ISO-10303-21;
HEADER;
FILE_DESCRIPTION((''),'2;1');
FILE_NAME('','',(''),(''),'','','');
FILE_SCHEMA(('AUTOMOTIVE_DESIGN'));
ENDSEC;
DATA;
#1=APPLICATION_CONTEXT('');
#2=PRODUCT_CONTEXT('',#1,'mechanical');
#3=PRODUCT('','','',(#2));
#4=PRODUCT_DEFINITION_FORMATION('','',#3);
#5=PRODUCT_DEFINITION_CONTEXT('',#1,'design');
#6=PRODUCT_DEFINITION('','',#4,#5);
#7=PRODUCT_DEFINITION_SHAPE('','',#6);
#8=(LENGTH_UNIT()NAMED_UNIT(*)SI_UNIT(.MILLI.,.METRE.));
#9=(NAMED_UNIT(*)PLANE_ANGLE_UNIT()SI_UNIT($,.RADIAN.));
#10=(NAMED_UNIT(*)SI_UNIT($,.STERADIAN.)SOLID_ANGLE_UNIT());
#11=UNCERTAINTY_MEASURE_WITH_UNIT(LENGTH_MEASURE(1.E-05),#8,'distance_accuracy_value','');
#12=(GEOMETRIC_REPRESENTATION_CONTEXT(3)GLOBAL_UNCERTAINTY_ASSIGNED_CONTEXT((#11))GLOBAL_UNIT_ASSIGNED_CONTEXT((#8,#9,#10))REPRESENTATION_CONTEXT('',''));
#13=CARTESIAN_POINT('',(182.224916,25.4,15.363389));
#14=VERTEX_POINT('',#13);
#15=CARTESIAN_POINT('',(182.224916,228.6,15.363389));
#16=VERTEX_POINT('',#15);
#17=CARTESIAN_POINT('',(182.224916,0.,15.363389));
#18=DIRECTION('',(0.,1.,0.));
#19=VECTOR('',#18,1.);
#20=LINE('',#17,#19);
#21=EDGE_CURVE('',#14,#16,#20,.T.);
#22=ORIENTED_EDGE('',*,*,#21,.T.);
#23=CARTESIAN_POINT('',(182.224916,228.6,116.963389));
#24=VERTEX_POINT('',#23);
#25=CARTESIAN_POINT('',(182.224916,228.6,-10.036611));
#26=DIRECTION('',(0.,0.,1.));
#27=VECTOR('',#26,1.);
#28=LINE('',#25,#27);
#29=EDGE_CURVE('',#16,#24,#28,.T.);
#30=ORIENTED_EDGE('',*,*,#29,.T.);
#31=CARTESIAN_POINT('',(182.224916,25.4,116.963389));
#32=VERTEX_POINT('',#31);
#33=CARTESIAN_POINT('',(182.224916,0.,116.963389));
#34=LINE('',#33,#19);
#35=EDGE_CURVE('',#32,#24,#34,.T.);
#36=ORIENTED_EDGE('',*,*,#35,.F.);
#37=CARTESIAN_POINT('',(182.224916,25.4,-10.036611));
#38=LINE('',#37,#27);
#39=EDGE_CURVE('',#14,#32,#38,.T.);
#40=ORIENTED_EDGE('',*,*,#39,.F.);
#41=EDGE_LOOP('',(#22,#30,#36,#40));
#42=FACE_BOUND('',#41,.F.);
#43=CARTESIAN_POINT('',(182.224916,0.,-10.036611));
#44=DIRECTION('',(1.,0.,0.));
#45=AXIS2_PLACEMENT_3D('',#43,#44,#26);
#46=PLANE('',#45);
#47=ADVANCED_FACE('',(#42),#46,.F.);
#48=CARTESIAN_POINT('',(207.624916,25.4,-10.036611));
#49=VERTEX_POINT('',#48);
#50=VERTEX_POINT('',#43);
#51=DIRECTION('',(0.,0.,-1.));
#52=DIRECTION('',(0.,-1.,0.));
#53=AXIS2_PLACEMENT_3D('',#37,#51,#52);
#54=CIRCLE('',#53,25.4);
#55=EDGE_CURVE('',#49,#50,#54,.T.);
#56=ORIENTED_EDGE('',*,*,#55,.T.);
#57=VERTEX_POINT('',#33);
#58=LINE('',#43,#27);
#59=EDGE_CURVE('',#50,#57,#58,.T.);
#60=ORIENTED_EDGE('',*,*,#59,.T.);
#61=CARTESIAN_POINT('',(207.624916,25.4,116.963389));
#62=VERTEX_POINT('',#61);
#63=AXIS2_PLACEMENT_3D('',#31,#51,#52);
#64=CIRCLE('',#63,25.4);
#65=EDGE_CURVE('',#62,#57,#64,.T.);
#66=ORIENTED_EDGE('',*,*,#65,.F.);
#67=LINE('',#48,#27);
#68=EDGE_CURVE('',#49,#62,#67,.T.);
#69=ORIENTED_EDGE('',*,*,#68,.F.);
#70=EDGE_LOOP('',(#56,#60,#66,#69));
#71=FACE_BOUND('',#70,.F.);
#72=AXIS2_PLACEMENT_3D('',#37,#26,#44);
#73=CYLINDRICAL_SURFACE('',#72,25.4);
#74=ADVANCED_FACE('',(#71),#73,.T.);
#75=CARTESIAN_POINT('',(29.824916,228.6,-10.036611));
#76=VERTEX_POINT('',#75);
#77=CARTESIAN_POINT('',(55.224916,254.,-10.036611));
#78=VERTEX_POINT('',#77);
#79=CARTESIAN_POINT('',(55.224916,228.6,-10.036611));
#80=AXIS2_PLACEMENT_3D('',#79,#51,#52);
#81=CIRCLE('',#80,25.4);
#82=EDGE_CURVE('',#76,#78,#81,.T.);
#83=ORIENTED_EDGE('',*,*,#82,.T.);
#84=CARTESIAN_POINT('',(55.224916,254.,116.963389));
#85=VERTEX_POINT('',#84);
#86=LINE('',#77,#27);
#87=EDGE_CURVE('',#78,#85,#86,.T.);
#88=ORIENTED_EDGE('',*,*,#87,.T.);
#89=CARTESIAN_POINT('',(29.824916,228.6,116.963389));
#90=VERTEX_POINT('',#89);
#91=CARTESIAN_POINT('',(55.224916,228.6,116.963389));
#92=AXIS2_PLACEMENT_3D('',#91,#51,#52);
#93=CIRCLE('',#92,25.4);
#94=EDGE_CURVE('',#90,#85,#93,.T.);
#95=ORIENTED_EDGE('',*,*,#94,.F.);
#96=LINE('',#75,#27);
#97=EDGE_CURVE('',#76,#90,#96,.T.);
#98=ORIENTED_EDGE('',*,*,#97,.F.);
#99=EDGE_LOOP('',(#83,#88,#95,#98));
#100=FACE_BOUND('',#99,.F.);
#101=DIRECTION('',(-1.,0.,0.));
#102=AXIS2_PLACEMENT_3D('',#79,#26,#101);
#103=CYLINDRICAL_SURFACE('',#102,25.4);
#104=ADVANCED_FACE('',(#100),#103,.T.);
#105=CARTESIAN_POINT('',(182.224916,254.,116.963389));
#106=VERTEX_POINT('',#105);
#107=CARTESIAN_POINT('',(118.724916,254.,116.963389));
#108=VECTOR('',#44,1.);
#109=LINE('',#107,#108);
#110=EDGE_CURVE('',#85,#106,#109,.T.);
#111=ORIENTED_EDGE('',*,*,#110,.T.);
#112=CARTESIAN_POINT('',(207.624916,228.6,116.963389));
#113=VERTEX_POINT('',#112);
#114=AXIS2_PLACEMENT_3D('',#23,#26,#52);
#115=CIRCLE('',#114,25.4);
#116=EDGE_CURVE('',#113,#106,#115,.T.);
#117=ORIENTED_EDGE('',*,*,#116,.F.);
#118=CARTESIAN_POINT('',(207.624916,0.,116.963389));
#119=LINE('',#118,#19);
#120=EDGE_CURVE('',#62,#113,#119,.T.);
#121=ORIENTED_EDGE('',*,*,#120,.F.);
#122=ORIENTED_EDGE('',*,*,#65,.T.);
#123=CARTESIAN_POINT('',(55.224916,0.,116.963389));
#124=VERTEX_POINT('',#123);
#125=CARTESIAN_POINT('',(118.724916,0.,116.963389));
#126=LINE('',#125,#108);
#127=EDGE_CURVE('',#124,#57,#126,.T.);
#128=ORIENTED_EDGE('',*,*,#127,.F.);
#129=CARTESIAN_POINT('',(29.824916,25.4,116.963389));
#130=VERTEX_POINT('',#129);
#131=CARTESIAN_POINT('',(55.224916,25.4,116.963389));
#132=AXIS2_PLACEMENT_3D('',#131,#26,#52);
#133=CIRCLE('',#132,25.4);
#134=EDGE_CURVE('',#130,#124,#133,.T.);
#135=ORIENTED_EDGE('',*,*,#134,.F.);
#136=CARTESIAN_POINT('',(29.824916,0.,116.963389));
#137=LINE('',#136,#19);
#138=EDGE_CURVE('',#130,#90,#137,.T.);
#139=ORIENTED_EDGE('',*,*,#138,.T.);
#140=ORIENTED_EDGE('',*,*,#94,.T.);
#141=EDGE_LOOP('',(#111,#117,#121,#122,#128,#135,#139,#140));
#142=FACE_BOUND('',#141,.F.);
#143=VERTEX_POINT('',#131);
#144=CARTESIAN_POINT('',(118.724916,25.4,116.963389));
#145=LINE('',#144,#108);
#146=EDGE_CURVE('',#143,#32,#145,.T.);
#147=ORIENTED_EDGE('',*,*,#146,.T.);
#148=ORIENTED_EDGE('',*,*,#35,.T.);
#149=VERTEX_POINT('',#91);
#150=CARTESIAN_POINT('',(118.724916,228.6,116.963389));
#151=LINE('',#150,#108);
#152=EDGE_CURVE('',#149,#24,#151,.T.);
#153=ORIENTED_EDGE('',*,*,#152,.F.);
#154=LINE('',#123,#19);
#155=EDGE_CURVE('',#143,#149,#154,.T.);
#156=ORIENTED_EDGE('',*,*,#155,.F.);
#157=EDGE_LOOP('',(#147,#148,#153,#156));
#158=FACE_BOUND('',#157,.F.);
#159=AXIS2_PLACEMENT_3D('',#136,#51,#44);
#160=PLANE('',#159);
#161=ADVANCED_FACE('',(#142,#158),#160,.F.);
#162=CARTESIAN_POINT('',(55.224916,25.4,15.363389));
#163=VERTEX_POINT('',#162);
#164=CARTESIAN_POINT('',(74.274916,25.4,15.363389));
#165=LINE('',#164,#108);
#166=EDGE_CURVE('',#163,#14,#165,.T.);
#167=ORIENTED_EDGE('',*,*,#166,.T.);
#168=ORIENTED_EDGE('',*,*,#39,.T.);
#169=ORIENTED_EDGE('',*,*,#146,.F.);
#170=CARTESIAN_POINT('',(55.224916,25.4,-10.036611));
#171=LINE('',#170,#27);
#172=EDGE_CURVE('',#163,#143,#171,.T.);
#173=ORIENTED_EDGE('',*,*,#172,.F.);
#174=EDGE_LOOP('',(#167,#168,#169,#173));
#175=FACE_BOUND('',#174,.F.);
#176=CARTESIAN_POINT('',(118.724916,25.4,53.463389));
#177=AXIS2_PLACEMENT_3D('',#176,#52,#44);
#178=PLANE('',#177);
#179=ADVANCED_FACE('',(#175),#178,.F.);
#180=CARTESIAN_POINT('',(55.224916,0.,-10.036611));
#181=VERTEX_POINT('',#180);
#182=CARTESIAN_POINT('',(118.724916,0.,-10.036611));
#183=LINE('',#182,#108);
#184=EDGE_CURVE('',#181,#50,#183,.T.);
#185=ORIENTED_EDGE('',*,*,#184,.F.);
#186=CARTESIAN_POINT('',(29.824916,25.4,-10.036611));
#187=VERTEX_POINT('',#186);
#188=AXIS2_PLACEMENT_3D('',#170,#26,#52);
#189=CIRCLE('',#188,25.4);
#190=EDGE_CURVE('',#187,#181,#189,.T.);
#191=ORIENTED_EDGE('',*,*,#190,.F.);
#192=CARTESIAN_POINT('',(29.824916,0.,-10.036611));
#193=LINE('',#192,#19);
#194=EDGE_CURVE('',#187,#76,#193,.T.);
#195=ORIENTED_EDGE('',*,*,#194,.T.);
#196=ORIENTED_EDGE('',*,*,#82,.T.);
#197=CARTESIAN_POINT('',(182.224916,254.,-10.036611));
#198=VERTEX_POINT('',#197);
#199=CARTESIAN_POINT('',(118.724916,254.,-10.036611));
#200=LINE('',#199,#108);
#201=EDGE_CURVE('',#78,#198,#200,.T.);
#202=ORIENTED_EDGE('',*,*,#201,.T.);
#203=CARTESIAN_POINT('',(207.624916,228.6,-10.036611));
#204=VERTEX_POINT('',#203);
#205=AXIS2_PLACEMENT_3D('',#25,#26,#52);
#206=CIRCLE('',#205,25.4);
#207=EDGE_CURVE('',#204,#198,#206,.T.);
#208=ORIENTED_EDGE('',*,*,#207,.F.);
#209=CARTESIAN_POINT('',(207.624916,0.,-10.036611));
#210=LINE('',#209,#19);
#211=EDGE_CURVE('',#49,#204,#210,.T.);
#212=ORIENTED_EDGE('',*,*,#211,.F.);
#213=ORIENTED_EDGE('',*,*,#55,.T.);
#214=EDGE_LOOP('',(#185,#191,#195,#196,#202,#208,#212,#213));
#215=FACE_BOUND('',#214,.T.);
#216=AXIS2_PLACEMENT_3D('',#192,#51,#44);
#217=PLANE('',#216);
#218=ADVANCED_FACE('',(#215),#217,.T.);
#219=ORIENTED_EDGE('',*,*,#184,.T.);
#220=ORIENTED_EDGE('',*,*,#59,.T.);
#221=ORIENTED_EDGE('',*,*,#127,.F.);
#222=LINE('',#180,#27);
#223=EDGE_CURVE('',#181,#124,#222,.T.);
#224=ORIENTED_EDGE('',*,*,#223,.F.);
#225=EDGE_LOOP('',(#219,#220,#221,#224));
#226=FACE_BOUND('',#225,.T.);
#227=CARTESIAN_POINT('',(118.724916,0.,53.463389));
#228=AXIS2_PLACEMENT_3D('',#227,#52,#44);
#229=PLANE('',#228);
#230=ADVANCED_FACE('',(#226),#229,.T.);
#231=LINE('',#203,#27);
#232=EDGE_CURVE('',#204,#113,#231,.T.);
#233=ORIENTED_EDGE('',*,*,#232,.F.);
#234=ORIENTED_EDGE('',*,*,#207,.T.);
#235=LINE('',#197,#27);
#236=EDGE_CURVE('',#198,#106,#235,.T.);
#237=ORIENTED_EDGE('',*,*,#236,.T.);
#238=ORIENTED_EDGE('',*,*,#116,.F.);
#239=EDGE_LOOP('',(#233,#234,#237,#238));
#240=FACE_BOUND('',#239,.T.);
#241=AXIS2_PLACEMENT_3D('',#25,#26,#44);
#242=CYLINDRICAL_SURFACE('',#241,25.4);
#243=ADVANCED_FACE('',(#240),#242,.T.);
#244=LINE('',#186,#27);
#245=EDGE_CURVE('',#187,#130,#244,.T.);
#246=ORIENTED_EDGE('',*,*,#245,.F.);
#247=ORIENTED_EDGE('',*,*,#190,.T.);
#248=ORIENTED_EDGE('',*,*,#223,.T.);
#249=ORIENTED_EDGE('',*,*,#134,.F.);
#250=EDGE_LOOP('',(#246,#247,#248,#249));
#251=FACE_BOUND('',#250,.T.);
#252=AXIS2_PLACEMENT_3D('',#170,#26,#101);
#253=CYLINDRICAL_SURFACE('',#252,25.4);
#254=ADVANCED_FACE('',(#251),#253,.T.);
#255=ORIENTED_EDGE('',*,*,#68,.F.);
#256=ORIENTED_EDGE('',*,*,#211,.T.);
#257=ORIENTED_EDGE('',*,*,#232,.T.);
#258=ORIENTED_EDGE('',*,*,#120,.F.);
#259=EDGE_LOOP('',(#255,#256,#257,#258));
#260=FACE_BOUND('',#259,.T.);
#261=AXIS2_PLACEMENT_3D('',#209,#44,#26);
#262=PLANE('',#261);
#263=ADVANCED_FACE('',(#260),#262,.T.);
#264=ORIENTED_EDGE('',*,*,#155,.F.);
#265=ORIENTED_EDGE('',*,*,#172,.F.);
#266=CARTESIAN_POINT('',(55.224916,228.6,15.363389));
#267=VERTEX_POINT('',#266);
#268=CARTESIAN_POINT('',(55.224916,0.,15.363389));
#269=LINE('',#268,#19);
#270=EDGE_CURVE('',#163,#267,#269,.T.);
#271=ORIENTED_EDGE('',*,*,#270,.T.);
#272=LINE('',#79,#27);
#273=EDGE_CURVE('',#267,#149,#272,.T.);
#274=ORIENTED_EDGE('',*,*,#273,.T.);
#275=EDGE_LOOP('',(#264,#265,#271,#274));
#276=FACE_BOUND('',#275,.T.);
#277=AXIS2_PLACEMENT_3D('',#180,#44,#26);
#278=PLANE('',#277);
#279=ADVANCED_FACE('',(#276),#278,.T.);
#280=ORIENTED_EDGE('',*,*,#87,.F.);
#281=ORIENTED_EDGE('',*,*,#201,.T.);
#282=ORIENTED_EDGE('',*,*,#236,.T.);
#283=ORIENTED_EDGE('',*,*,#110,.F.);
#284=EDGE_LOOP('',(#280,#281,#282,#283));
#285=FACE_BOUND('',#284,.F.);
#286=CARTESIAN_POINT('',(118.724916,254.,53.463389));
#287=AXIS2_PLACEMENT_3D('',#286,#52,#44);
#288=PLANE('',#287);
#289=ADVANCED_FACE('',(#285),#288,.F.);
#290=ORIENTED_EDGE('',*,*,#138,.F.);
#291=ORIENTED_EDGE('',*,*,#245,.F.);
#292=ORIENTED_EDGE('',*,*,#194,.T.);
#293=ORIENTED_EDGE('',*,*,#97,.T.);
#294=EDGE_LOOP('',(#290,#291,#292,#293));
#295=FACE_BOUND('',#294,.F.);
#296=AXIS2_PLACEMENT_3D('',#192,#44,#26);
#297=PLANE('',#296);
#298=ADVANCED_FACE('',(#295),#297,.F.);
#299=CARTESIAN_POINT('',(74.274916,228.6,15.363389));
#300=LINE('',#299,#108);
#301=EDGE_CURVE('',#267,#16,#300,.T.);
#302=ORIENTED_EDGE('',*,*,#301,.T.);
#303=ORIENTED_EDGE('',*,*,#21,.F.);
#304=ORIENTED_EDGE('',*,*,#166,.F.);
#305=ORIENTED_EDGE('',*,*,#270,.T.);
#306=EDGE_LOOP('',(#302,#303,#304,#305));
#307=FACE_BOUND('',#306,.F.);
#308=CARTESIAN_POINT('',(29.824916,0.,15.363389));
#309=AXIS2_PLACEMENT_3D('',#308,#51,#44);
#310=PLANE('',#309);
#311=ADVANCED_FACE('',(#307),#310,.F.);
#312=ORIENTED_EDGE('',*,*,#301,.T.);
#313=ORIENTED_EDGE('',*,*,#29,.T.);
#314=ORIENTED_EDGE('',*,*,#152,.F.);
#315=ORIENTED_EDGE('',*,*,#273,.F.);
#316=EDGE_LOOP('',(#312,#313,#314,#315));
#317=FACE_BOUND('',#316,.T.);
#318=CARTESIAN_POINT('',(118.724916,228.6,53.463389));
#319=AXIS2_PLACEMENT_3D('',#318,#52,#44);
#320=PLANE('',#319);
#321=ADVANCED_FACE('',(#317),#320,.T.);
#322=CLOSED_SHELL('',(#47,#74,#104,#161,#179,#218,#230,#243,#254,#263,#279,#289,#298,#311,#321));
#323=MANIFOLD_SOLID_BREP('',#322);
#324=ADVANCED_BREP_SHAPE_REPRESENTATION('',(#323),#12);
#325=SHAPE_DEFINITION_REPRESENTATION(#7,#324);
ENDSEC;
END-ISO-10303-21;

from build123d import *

# Parameters (mm, degrees)
F0_W     = 177.8
F0_H     = 127
F1_DEPTH = 254
F2_R     = 25.4
F3_T     = 25.4


# Not quite as in the source:
# - a shell that OpenCascade refuses in one call is made with other operations: the cavity is built on its own and cut out


with BuildPart() as f1:
    # F0 (on Front) → F1 (new body)
    with BuildSketch(Plane.XZ):
        with Locations((118.7249161303, 53.4633891671)):
            Rectangle(F0_W, F0_H)
    extrude(amount=-F1_DEPTH)

    # F2
    f2_edges = [f1.edges().sort_by_distance(p)[0] for p in [
        (207.624916, 0, 53.463389),
        (207.624916, 254, 53.463389),
        (29.824916, 254, 53.463389),
        (29.824916, 0, 53.463389),
    ]]
    fillet(f2_edges, radius=F2_R)

    # F3: shell of thickness 25.4, made by hand


with BuildPart() as f3_core1:
    # F3_t2: copy of F1
    add(f1.part)

    # the walls: a layer under each face that stays
    f3_faces = [f3_core1.faces().sort_by_distance(p)[0] for p in [
        (207.6249161303, 127, 53.4633891671),
        (118.7249161303, 0, 53.4633891671),
        (118.7249161303, 254, 53.4633891671),
        (29.8249161303, 127, 53.4633891671),
        (118.7249161303, 127, -10.0366108329),
    ]]
    thicken(f3_faces, amount=-F3_T, mode=Mode.SUBTRACT)


with BuildPart() as f1_1:
    add(f1.part)

    # what is left inside the walls is the cavity
    f3_cavity = [f3_core1.part.solids().sort_by_distance(p)[0] for p in [
        (118.724916, 160.866667, 15.617389),
    ]]
    add(f3_cavity, mode=Mode.SUBTRACT)


solid = f1_1.part
